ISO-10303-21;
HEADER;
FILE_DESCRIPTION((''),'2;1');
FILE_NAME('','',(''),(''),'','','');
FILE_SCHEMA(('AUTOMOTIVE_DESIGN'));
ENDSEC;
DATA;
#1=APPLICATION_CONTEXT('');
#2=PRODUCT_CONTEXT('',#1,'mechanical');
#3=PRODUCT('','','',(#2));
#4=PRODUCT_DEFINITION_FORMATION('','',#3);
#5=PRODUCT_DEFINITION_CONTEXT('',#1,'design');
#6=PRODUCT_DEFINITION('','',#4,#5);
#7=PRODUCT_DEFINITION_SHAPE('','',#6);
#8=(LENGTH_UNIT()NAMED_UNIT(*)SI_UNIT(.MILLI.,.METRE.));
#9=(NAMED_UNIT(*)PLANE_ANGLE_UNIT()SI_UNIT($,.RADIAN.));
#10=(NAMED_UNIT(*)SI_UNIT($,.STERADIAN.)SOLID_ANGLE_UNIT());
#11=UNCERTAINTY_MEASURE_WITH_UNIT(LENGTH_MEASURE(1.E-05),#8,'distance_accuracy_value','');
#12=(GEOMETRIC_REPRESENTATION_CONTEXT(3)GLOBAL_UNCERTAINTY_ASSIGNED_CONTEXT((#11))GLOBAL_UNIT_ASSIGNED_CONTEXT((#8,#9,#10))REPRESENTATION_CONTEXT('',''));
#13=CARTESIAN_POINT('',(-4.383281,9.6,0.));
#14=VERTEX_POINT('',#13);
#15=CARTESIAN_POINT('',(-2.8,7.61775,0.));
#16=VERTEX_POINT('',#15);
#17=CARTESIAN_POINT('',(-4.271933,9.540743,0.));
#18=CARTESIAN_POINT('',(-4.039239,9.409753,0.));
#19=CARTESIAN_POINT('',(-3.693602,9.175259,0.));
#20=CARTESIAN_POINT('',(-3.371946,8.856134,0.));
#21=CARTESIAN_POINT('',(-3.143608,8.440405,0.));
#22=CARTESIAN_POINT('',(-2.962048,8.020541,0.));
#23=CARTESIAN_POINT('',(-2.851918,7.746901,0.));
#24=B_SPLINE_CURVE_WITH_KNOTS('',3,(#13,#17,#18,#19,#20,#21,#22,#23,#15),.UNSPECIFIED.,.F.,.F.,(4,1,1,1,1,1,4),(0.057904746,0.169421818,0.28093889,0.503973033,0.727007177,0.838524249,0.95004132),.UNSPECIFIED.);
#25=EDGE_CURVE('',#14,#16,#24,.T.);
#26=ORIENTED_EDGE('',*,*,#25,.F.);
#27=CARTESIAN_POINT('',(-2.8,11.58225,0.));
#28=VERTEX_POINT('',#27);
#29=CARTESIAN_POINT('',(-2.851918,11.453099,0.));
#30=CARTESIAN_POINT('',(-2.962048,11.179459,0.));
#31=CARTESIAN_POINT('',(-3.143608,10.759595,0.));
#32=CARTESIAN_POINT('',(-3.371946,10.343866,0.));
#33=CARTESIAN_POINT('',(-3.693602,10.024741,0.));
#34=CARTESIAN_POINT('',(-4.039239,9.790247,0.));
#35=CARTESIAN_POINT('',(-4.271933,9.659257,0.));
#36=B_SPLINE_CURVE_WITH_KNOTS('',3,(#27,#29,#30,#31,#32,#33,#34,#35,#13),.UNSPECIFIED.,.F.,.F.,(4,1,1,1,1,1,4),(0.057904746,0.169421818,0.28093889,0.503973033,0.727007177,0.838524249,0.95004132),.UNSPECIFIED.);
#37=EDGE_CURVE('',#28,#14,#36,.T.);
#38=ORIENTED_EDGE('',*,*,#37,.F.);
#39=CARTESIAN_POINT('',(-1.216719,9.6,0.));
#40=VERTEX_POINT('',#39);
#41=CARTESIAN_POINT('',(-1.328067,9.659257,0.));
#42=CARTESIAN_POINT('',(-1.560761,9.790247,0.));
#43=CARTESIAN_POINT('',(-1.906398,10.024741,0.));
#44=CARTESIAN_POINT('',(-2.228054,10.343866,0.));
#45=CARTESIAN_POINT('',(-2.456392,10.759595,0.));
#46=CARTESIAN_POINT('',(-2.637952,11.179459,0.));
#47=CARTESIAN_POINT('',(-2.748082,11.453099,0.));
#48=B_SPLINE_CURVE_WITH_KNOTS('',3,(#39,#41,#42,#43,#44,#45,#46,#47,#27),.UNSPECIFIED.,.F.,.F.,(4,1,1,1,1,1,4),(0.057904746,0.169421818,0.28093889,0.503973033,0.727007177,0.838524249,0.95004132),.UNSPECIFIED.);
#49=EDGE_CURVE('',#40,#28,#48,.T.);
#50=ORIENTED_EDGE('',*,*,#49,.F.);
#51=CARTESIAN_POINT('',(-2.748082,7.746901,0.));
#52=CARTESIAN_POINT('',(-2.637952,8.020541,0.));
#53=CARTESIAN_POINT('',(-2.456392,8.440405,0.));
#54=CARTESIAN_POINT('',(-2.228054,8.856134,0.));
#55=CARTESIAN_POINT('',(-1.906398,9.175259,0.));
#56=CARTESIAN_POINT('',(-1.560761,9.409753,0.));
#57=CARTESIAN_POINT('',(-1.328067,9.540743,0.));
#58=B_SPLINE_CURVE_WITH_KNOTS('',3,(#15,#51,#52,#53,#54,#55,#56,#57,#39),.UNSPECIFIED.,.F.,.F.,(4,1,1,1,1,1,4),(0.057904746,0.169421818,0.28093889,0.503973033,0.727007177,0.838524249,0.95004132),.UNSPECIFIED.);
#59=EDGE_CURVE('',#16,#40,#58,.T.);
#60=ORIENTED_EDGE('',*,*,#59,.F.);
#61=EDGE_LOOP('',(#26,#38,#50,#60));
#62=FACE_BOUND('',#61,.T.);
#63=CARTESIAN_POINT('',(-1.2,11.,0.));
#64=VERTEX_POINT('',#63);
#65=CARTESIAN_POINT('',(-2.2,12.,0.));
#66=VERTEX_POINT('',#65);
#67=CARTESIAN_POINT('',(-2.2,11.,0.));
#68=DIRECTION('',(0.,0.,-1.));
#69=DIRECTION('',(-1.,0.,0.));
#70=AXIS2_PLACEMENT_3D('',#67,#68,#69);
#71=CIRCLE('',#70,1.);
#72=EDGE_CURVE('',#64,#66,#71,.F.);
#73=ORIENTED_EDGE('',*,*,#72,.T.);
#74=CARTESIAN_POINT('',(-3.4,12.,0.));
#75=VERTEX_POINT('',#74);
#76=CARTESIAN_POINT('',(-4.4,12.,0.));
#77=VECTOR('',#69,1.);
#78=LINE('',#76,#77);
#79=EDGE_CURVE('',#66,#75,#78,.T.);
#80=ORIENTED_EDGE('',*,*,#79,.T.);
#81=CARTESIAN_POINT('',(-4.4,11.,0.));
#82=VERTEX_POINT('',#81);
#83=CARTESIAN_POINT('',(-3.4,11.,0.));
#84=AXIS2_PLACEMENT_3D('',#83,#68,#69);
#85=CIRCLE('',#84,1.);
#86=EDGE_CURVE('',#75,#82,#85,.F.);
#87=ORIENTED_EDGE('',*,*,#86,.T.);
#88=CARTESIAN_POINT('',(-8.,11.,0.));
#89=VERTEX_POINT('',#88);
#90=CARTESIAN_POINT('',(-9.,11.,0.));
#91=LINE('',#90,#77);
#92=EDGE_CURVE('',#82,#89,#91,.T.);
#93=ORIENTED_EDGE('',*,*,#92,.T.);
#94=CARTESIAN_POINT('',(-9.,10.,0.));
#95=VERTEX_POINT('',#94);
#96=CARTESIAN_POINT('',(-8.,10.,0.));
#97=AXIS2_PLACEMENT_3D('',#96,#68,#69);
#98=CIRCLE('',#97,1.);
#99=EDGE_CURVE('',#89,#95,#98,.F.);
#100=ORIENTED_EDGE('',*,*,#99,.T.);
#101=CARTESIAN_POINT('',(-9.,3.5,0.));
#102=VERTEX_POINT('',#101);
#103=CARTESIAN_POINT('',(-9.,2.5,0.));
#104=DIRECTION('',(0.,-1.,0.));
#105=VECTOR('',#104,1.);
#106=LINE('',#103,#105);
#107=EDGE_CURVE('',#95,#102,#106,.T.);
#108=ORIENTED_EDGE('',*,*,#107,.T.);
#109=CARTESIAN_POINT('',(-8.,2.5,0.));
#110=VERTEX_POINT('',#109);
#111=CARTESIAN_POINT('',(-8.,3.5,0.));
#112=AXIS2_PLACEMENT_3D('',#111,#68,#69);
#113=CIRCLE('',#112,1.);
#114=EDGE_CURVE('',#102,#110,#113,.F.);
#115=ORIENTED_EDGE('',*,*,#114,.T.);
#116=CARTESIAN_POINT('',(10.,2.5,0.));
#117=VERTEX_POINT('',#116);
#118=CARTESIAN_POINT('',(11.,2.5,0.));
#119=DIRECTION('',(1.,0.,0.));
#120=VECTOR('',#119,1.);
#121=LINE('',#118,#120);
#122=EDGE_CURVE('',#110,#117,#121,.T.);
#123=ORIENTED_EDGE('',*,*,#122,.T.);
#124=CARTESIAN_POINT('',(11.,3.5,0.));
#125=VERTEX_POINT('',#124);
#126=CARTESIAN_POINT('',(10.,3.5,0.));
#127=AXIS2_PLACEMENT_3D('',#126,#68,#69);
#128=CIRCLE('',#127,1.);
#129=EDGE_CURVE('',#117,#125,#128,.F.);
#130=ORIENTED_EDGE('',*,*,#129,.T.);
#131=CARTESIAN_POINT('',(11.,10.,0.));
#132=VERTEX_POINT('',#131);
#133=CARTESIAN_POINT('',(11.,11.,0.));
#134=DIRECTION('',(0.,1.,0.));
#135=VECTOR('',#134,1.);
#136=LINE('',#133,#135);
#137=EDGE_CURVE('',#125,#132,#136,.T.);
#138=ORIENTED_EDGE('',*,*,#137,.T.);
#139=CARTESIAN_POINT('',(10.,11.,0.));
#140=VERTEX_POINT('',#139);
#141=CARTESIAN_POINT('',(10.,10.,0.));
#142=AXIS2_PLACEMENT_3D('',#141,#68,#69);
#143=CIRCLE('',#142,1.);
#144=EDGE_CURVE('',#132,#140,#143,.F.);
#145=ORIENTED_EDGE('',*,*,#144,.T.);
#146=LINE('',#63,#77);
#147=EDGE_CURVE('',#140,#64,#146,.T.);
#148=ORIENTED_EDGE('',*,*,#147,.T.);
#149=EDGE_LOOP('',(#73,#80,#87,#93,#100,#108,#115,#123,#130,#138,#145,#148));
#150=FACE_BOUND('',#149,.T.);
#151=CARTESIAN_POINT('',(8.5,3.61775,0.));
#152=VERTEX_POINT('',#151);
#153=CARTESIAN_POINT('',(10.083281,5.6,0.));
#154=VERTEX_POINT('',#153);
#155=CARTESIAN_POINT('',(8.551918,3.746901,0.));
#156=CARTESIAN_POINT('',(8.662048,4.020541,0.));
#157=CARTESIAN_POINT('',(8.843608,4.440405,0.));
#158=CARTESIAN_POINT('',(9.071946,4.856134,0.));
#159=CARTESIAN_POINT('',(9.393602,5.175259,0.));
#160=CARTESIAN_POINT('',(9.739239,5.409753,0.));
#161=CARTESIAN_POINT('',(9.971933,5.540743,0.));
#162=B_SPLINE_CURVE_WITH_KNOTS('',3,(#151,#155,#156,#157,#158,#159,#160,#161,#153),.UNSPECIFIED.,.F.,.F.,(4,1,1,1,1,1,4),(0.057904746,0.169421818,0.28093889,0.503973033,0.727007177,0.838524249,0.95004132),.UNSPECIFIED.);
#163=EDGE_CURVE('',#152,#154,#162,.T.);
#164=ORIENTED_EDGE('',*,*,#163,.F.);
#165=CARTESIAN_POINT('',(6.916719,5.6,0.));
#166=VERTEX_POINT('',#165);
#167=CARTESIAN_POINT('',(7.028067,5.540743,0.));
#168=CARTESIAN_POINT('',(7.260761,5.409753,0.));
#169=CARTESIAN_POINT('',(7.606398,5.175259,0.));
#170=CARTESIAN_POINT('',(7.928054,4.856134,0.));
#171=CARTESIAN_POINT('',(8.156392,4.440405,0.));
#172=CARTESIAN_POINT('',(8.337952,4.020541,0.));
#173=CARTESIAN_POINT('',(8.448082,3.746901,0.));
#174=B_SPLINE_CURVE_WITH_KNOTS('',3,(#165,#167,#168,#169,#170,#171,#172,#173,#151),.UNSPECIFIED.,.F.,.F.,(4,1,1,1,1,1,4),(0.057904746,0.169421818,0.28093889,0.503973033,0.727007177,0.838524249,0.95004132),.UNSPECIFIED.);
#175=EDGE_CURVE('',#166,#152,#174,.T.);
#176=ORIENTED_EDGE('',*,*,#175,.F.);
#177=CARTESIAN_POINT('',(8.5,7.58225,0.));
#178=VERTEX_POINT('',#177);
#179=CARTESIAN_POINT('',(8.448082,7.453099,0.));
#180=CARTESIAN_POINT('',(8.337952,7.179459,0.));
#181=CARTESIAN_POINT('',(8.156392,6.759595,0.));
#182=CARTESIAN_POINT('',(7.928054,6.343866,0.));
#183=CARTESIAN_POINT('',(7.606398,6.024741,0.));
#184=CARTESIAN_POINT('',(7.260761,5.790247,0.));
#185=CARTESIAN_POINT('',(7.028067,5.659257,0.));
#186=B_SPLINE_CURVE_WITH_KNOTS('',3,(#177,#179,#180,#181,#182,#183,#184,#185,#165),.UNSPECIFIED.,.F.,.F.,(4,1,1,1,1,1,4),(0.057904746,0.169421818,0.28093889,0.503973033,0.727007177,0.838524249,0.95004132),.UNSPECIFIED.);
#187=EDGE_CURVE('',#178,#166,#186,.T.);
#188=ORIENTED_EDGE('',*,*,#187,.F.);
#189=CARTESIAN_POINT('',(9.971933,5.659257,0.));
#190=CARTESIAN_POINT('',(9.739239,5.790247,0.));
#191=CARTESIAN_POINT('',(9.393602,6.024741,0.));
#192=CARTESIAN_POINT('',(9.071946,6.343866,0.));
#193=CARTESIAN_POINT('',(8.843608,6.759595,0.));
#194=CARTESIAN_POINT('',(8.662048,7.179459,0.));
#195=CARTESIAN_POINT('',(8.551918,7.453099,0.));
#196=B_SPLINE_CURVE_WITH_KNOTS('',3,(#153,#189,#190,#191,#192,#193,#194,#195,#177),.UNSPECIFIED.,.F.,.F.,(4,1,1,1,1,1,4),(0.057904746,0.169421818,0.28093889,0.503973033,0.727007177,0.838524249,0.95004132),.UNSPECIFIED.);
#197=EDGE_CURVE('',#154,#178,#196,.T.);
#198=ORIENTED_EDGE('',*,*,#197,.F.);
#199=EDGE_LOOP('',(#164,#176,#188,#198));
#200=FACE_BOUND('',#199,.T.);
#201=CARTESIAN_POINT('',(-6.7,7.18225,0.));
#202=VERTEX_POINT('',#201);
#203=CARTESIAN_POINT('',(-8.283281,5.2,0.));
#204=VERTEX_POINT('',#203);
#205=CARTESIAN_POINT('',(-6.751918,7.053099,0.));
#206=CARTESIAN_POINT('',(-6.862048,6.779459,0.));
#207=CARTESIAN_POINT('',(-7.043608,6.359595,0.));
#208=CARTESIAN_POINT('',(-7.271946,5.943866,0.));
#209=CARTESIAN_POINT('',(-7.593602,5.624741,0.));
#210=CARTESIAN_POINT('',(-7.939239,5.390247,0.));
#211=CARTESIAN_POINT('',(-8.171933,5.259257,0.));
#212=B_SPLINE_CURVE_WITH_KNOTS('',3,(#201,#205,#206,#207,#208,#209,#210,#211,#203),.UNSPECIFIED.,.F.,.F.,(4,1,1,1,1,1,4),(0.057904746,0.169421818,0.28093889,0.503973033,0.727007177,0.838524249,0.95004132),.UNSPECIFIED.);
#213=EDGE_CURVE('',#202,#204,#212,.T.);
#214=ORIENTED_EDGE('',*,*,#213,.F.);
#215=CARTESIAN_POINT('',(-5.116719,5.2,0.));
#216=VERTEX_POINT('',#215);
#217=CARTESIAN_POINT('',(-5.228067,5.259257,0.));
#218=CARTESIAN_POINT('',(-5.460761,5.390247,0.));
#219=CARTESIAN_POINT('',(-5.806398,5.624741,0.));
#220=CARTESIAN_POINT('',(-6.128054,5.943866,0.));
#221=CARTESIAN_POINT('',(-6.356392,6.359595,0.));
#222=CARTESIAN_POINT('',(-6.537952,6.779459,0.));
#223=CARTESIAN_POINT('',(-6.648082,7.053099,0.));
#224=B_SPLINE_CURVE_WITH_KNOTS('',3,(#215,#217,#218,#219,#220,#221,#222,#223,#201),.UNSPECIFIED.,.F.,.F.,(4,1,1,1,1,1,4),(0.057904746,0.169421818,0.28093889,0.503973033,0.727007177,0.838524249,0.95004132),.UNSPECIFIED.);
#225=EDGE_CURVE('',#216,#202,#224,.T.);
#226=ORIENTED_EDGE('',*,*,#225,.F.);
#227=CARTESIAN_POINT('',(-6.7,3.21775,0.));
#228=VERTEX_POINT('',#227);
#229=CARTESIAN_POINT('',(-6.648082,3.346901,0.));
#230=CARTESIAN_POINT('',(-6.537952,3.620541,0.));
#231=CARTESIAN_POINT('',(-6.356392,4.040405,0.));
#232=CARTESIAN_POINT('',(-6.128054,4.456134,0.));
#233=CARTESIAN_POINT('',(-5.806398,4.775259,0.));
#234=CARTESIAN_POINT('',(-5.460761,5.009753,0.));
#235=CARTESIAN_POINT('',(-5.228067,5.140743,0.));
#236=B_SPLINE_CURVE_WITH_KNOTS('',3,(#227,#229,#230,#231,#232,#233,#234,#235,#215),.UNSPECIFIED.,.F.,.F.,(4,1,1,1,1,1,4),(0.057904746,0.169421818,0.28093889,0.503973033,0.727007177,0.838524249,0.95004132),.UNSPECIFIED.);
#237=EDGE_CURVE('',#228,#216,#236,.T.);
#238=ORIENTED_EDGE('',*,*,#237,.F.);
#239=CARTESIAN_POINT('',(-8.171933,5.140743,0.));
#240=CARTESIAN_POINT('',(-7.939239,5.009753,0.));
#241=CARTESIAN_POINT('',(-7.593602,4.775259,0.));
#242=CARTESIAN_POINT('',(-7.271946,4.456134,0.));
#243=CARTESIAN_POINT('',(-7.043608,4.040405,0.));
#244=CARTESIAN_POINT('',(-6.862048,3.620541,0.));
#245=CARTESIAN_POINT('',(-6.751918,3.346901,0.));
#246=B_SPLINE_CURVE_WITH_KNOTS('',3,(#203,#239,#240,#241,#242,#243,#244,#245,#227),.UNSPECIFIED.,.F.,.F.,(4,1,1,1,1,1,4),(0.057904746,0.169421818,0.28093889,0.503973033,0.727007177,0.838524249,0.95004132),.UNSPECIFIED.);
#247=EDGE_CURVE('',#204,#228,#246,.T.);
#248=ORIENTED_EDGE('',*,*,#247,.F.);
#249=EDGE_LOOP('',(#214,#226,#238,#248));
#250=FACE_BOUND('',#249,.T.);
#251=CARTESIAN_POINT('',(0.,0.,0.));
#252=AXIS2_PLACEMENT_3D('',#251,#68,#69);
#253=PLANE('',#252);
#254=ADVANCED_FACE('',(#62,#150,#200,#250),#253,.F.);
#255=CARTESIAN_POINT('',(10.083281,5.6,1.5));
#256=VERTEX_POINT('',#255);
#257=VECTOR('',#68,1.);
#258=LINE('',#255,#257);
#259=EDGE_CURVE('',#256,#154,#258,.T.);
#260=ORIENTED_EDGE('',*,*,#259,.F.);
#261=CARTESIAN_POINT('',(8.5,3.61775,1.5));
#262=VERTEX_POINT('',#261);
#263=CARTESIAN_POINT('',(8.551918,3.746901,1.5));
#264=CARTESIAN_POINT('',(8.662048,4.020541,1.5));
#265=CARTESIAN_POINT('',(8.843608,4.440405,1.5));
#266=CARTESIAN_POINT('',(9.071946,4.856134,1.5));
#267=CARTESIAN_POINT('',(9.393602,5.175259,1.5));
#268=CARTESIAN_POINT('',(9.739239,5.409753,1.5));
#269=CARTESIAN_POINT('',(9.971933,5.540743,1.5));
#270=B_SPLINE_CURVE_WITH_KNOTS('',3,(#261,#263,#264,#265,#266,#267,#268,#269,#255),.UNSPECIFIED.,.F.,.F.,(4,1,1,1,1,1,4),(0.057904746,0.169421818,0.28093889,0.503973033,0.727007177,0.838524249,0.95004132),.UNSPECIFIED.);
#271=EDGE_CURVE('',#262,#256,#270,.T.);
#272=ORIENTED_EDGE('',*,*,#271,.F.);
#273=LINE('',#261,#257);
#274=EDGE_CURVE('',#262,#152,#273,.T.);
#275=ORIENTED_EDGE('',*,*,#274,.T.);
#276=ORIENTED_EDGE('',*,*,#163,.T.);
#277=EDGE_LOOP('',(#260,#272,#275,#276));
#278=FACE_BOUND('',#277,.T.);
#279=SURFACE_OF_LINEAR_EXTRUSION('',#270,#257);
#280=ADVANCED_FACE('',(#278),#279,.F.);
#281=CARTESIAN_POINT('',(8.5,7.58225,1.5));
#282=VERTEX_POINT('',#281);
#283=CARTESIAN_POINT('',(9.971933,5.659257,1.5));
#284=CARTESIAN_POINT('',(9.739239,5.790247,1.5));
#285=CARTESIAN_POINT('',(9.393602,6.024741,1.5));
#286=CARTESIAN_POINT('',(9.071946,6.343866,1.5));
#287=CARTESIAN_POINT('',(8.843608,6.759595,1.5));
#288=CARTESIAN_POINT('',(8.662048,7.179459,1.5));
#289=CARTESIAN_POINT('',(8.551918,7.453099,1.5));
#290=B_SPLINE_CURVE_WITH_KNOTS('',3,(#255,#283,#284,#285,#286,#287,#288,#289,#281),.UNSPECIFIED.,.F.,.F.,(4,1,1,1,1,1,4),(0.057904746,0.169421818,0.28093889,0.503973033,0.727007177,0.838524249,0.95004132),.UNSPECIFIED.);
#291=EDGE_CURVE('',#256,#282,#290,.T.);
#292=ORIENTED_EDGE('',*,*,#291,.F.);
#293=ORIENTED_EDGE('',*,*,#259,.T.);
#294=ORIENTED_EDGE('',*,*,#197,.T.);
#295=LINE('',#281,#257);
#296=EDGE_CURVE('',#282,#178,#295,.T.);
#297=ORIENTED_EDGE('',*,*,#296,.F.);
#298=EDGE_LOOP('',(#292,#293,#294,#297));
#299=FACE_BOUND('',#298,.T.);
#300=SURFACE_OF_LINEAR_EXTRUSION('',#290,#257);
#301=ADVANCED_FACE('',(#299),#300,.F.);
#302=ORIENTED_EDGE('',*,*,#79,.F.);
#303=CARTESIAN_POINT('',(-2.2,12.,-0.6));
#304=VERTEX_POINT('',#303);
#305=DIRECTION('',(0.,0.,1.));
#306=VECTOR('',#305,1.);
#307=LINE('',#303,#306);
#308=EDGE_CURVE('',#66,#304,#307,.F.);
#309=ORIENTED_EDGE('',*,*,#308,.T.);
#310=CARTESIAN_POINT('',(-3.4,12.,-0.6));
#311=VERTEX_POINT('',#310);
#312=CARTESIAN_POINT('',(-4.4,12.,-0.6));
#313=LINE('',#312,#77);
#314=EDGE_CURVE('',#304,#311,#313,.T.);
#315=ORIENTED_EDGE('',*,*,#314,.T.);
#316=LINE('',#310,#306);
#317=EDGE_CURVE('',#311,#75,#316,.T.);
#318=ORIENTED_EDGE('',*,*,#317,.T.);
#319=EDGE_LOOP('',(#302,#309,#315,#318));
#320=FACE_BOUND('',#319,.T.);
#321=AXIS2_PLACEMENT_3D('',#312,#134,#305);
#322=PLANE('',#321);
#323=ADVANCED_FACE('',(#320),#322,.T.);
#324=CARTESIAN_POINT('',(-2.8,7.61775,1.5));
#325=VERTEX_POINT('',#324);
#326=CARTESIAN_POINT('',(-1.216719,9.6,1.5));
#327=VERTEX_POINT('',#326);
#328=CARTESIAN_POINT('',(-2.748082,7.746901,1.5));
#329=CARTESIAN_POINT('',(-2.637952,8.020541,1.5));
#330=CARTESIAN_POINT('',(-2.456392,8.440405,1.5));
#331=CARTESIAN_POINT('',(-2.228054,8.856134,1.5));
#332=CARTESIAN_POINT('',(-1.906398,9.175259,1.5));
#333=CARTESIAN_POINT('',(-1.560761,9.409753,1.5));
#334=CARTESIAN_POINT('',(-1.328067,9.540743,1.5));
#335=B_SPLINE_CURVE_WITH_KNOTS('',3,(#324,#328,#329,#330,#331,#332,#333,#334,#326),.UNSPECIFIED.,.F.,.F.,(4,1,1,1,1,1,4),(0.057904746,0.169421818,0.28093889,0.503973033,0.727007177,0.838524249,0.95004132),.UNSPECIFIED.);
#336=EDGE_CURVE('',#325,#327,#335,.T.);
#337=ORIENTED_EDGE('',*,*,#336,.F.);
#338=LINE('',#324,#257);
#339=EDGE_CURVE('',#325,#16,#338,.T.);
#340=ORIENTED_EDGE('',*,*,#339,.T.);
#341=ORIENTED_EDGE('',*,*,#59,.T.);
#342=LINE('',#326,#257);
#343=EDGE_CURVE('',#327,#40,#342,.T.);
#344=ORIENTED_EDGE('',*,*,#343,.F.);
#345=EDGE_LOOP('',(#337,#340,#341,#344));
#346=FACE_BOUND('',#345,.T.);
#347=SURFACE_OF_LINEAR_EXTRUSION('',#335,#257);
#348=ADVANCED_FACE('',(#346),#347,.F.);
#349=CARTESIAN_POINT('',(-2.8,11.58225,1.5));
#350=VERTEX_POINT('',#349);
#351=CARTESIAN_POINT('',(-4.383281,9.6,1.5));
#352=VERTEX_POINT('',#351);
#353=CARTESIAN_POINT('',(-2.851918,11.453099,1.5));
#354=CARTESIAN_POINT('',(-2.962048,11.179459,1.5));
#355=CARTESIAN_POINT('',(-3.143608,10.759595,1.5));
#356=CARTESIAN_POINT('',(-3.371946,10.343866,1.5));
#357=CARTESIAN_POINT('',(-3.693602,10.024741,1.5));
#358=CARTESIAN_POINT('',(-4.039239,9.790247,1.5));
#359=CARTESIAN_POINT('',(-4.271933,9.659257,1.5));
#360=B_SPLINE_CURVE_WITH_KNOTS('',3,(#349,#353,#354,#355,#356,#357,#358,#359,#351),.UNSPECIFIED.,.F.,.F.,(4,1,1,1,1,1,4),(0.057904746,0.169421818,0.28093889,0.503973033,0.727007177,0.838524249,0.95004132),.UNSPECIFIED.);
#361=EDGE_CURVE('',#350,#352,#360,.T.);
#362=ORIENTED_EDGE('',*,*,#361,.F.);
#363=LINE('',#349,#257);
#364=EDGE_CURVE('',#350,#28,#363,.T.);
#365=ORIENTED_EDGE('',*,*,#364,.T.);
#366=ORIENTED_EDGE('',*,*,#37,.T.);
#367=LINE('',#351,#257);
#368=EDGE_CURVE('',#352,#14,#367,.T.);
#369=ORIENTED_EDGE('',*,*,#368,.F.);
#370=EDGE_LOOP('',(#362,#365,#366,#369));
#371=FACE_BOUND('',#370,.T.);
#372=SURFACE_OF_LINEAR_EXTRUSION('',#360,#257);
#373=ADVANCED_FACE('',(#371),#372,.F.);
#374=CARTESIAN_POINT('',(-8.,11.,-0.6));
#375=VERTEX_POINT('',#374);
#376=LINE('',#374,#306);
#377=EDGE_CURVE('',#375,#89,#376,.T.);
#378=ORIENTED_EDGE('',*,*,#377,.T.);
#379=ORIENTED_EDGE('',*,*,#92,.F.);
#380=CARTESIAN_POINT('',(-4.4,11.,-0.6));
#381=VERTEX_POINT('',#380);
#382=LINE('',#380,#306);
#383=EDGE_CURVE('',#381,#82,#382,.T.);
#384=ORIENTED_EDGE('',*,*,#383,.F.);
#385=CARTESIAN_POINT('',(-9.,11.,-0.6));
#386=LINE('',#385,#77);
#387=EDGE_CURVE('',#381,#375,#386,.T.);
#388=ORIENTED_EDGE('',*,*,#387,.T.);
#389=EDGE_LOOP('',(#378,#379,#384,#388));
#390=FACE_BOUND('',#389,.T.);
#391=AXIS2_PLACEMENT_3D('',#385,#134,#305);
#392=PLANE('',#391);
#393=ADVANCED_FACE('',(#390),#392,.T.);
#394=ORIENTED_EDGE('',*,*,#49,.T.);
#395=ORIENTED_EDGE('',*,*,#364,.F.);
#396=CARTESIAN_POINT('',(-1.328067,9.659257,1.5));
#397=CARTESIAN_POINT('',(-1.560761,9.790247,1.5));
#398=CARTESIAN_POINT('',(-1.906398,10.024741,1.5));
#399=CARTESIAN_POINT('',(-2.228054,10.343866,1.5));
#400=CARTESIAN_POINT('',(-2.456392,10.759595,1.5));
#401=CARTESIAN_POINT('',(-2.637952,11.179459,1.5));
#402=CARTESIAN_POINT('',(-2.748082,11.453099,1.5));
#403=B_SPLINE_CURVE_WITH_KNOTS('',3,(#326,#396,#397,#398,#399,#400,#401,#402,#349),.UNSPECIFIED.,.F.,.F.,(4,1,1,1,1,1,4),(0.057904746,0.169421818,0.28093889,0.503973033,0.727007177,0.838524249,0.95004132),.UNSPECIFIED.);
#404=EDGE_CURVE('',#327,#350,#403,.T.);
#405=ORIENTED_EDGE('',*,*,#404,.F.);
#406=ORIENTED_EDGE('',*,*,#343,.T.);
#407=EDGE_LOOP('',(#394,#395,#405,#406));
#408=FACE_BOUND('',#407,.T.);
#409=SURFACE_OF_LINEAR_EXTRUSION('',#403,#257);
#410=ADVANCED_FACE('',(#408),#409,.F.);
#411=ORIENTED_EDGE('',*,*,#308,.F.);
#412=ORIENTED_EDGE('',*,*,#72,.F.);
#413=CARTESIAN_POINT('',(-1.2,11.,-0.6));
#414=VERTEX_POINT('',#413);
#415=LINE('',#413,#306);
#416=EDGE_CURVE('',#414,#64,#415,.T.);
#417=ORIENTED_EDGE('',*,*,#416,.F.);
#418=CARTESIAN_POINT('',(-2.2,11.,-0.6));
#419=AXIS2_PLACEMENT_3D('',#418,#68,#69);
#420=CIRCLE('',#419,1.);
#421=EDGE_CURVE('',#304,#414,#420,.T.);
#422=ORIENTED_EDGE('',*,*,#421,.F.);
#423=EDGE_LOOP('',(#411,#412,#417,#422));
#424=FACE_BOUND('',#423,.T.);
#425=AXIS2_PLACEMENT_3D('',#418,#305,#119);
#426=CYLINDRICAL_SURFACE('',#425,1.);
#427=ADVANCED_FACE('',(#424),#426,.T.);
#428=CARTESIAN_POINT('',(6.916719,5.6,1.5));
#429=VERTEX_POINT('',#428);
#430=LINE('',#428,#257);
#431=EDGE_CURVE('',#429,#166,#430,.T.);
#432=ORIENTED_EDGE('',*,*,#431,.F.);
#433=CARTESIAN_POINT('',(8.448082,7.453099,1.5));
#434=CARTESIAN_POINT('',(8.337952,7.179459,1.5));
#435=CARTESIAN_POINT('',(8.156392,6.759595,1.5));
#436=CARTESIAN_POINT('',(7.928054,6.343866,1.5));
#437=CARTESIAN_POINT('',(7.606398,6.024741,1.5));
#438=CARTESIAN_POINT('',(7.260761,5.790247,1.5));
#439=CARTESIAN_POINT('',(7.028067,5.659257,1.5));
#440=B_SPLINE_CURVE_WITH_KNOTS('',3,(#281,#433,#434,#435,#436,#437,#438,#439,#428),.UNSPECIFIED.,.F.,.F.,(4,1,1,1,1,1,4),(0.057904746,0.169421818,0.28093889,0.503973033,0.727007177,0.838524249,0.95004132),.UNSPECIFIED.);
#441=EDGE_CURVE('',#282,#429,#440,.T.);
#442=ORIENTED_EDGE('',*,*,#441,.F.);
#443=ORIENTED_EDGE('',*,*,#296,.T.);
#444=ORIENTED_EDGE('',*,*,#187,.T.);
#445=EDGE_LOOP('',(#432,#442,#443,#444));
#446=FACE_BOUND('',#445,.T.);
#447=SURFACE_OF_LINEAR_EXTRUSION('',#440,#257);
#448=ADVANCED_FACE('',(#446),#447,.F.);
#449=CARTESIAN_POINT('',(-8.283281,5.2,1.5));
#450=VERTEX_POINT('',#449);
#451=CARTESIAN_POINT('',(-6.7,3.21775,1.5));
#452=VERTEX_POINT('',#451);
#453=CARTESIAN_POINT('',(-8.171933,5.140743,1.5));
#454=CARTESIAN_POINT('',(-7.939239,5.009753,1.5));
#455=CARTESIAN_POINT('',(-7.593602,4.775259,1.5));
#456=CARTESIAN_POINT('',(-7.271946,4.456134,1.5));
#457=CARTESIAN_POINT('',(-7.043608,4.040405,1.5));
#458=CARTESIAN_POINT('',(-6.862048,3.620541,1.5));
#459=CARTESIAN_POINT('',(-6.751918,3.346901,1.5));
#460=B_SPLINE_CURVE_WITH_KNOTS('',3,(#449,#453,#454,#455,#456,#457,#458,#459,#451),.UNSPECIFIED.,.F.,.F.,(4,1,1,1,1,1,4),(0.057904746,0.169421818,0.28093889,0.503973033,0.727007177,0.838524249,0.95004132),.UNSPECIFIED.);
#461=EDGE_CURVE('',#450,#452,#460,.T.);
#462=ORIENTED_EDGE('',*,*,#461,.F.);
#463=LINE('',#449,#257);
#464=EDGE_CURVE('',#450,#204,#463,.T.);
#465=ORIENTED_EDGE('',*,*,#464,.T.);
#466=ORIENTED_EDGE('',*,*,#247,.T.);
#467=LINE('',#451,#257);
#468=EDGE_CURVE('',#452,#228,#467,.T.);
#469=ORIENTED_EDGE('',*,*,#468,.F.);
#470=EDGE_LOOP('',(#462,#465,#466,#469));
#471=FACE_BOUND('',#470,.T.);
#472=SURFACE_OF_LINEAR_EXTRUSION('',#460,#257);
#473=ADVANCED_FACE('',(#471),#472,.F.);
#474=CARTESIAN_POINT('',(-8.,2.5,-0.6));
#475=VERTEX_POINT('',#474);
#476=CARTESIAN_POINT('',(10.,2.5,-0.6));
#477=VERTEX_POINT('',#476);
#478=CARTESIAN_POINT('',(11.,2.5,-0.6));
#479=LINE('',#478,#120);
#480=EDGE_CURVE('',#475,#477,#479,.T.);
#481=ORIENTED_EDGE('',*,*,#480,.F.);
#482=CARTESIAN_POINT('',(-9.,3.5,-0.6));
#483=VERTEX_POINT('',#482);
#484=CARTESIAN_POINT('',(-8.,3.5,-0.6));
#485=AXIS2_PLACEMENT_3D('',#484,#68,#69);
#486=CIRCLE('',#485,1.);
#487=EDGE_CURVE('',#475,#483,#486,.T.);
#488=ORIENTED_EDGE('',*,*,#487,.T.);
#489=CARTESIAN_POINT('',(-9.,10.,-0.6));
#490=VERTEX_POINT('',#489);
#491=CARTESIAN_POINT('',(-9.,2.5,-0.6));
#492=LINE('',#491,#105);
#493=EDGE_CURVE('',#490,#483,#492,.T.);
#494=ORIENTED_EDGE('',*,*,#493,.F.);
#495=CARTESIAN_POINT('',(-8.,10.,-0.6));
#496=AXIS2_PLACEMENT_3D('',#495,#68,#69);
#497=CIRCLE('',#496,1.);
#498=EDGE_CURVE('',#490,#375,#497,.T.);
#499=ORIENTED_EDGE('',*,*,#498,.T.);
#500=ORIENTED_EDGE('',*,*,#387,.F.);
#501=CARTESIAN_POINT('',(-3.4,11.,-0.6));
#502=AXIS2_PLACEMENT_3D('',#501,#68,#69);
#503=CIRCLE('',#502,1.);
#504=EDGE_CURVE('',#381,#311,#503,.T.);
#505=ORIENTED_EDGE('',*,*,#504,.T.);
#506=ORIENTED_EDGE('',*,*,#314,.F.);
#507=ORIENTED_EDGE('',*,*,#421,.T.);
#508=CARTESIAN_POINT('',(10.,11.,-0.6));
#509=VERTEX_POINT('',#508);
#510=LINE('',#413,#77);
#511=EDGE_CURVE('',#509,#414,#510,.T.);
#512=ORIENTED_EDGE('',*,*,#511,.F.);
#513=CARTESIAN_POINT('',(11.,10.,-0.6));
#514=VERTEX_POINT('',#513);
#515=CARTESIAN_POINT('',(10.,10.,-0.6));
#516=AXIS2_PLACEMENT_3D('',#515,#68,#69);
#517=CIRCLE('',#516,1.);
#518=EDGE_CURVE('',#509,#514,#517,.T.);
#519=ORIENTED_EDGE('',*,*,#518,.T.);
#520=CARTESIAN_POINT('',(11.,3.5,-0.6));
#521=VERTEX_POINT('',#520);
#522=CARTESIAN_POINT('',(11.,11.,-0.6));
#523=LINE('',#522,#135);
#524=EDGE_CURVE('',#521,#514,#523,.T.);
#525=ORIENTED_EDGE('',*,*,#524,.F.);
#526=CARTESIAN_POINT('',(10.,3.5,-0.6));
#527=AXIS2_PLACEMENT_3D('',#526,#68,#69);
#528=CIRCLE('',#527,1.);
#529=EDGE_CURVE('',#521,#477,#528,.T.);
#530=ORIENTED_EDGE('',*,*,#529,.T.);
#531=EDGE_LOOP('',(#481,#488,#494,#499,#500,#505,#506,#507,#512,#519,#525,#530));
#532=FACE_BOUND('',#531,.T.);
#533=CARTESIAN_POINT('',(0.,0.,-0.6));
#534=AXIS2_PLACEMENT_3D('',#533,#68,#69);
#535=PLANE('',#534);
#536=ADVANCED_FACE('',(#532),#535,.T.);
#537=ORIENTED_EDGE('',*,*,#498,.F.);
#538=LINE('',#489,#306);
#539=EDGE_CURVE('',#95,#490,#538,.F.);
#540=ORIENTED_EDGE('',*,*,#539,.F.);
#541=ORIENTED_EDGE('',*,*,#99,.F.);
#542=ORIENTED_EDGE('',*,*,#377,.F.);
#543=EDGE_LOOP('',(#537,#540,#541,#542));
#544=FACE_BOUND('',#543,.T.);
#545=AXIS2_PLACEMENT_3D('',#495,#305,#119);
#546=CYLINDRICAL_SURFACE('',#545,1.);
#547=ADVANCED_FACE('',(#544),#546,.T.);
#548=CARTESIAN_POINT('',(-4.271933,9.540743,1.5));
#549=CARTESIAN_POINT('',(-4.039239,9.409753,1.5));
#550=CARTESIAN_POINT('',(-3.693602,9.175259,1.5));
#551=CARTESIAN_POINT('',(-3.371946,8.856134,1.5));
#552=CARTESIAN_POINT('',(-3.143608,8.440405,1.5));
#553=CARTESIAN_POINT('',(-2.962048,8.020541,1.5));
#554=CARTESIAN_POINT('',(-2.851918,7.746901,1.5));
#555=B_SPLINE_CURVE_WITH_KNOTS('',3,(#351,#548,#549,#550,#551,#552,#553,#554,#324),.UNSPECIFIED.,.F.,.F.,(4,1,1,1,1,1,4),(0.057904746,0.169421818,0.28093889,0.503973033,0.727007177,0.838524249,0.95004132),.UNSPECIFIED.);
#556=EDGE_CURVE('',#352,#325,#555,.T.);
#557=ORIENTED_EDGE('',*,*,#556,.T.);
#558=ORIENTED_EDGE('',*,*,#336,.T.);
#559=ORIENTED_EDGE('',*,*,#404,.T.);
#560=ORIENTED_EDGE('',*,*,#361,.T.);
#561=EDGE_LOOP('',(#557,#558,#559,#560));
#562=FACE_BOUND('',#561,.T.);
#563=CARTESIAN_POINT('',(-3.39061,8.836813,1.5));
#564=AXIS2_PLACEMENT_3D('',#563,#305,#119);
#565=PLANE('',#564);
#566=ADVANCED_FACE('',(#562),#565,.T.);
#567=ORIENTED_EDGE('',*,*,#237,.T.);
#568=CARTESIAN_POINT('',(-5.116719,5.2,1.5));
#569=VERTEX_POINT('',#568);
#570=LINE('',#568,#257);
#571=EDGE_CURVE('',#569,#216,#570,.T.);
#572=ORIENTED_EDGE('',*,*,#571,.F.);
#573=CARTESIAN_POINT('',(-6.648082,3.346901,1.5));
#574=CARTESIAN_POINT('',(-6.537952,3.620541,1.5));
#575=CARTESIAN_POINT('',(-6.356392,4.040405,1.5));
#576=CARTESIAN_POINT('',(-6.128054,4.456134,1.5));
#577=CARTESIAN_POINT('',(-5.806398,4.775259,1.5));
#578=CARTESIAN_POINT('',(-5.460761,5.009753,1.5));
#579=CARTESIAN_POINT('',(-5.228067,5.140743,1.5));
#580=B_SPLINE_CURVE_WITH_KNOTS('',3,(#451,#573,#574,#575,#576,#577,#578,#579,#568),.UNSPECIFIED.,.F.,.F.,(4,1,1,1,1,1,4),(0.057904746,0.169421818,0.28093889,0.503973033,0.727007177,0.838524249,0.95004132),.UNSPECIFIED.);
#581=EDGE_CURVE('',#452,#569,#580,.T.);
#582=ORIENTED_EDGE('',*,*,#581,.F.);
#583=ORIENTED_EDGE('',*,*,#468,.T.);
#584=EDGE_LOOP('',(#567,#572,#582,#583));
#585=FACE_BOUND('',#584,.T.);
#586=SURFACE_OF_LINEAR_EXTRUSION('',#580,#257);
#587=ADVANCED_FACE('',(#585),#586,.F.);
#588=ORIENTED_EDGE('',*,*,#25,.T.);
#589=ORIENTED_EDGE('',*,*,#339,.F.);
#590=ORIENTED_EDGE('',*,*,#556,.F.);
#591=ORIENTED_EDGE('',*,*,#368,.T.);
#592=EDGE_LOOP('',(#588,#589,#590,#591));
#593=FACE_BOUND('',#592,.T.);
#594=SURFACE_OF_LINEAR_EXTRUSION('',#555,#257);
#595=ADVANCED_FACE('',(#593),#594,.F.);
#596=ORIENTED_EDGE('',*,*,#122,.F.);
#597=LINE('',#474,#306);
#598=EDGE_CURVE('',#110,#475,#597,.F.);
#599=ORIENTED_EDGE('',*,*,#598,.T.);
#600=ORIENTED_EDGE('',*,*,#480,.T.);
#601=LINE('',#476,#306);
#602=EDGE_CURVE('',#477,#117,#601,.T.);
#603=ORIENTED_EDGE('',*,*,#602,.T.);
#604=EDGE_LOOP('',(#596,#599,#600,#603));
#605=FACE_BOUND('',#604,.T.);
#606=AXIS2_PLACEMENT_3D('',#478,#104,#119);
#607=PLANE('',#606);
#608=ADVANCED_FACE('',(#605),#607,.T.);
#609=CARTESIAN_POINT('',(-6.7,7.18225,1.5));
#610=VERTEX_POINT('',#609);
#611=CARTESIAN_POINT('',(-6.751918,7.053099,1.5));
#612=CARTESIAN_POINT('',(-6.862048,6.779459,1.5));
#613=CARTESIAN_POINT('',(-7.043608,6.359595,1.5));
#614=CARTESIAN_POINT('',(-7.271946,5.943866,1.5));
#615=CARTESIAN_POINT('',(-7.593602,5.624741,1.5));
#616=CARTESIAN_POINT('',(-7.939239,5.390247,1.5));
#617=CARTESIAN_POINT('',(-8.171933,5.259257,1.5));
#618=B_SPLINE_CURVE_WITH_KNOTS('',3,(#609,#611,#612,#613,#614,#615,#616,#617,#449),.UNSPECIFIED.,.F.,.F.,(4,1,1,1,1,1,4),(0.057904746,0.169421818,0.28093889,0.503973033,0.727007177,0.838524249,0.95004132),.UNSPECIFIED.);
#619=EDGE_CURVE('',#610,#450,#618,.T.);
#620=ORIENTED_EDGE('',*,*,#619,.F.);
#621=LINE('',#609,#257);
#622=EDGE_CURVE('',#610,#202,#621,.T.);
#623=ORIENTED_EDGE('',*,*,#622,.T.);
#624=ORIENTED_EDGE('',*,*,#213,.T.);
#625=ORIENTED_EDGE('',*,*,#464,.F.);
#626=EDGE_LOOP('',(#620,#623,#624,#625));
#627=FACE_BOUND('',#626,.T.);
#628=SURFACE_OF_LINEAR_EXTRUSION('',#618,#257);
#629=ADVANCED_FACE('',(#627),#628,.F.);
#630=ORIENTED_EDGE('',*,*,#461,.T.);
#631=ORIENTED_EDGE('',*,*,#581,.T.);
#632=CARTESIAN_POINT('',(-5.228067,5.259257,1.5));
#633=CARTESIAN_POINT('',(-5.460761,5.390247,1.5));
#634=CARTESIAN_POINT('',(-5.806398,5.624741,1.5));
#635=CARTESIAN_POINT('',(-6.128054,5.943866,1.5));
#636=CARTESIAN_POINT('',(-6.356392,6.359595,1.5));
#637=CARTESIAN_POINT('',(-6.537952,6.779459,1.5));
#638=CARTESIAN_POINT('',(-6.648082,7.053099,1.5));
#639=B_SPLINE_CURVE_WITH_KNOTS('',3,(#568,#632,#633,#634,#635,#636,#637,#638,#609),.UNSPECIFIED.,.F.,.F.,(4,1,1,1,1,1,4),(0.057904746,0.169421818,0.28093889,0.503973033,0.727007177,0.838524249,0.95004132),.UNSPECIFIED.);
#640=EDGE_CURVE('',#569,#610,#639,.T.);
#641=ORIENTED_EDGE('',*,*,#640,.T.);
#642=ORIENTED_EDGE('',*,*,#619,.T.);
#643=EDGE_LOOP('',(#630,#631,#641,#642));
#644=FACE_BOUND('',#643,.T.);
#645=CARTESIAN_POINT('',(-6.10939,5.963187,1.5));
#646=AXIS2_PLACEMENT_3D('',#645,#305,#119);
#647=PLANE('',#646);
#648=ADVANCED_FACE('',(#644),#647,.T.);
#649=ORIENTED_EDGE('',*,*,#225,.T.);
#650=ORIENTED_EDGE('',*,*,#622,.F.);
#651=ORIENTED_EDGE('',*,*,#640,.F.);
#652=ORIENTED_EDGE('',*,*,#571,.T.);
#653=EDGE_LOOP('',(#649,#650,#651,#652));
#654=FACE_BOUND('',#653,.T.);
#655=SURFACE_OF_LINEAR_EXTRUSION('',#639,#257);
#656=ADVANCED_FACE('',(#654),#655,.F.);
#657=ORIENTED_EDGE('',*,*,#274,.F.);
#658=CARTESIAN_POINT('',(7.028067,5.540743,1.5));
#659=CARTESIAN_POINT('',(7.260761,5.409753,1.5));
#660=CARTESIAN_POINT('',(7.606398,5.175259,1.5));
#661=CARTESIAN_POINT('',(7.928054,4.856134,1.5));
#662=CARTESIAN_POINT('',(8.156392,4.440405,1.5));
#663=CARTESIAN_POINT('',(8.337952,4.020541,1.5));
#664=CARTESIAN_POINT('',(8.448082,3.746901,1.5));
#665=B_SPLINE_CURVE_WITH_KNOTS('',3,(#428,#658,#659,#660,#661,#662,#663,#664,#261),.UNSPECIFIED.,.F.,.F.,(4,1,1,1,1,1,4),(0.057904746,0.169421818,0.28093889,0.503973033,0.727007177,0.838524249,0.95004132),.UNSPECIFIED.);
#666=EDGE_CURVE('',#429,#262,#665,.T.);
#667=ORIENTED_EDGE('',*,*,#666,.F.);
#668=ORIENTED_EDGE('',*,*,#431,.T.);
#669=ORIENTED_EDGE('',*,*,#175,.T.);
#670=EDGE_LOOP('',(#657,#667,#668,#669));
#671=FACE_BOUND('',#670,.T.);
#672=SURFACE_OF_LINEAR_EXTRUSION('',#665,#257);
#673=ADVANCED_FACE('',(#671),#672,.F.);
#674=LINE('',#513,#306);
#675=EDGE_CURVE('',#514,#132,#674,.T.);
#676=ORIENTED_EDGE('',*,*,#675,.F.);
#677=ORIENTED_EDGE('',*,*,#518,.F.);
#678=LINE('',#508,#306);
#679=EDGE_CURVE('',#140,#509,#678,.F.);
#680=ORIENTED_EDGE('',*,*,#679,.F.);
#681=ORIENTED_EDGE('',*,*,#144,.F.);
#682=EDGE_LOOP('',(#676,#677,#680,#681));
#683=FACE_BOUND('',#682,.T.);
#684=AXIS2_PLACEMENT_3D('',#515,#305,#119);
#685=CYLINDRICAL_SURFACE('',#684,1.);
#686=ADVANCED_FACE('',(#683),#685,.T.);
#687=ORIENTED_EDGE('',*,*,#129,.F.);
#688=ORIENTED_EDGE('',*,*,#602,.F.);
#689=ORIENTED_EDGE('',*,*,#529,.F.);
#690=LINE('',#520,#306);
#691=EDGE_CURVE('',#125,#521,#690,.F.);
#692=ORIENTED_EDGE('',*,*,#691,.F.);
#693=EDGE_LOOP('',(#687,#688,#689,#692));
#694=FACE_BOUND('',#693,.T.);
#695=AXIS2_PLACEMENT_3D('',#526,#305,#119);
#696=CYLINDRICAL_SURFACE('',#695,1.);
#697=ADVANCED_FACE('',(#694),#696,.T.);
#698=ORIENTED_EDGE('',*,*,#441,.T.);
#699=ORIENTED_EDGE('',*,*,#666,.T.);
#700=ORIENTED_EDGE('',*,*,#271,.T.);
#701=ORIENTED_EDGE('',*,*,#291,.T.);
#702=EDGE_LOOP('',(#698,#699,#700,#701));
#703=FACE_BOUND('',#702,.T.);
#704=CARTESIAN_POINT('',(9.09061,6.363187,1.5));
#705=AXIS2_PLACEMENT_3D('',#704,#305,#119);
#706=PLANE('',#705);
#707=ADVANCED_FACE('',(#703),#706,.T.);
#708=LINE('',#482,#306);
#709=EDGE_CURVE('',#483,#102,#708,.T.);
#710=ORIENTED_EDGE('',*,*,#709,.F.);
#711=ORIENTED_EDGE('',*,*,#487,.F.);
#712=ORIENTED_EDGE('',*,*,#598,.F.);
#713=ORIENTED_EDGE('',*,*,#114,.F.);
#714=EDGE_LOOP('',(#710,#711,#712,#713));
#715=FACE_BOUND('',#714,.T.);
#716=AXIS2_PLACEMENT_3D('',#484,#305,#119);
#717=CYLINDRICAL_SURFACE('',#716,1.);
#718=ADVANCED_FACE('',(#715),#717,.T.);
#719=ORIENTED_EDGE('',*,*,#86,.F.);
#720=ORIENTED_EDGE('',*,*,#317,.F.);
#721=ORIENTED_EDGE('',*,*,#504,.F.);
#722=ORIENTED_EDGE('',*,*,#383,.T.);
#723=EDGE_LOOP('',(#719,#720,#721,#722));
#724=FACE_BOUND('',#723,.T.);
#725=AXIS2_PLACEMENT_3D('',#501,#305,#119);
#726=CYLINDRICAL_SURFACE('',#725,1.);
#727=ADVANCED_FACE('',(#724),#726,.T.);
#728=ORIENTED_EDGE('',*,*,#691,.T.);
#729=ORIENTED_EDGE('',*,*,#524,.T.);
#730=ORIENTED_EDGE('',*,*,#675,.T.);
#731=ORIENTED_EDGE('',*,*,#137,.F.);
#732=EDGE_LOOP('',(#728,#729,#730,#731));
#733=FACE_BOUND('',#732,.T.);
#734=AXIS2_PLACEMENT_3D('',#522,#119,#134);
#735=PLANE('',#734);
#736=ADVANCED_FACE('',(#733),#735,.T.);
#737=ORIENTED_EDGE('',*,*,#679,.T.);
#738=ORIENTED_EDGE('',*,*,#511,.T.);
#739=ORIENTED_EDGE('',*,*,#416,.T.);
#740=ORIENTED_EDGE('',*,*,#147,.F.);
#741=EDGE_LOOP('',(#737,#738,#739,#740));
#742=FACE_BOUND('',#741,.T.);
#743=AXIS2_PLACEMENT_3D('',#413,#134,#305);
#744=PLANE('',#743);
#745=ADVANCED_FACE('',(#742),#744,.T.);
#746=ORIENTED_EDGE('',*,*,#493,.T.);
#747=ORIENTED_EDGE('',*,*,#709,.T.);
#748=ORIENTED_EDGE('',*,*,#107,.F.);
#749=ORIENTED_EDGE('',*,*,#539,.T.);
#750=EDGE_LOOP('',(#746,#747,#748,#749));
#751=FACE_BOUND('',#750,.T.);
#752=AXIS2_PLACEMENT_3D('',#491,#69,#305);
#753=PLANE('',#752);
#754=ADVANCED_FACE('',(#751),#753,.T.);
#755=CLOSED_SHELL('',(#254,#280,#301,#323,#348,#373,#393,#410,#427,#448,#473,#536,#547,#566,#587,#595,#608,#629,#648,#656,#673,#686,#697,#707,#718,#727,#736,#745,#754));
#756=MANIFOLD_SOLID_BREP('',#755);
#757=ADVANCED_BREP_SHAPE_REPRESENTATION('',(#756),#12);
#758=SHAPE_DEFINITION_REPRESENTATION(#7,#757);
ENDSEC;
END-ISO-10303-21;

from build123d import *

# Parameters (mm, degrees)
BOSS_EXTRUDE1_DEPTH = 0.6
BOSS_EXTRUDE2_DEPTH = 1.5
FILLET1_R           = 1


with BuildPart() as part:
    # Sketch2 → Boss-Extrude1 (new body)
    with BuildSketch(Plane.XY):
        Polygon((-9, 11), (-4.4, 11), (-4.4, 12), (-1.2, 12), (-1.2, 11), (11, 11), (11, 2.5), (-9, 2.5), align=None)
    extrude(amount=-BOSS_EXTRUDE1_DEPTH)

    # Sketch1 → Boss-Extrude2 (add)
    with BuildSketch(Plane.XY):
        with BuildLine():
            add(Edge.make_bspline(
                [(8.5, 7.582250387), (8.448081693, 7.453099482), (8.337951661, 7.179459039), (8.156392198, 6.75959463), (7.928053742, 6.343866223), (7.606398256, 6.024741111), (7.260761425, 5.790247234), (7.028066866, 5.65925749), (6.916719247, 5.6)],
                knots=[0.057904746, 0.057904746, 0.057904746, 0.057904746, 0.169421818, 0.28093889, 0.503973033, 0.727007177, 0.838524249, 0.95004132, 0.95004132, 0.95004132, 0.95004132], degree=3))
            add(Edge.make_bspline(
                [(6.916719247, 5.6), (7.028066866, 5.54074251), (7.260761425, 5.409752766), (7.606398256, 5.175258889), (7.928053742, 4.856133777), (8.156392198, 4.44040537), (8.337951661, 4.020540961), (8.448081693, 3.746900518), (8.5, 3.617749613)],
                knots=[0.057904746, 0.057904746, 0.057904746, 0.057904746, 0.169421818, 0.28093889, 0.503973033, 0.727007177, 0.838524249, 0.95004132, 0.95004132, 0.95004132, 0.95004132], degree=3))
            add(Edge.make_bspline(
                [(8.5, 3.617749613), (8.551918307, 3.746900518), (8.662048339, 4.020540961), (8.843607802, 4.44040537), (9.071946258, 4.856133777), (9.393601744, 5.175258889), (9.739238575, 5.409752766), (9.971933134, 5.54074251), (10.083280753, 5.6)],
                knots=[0.057904746, 0.057904746, 0.057904746, 0.057904746, 0.169421818, 0.28093889, 0.503973033, 0.727007177, 0.838524249, 0.95004132, 0.95004132, 0.95004132, 0.95004132], degree=3))
            add(Edge.make_bspline(
                [(10.083280753, 5.6), (9.971933134, 5.65925749), (9.739238575, 5.790247234), (9.393601744, 6.024741111), (9.071946258, 6.343866223), (8.843607802, 6.75959463), (8.662048339, 7.179459039), (8.551918307, 7.453099482), (8.5, 7.582250387)],
                knots=[0.057904746, 0.057904746, 0.057904746, 0.057904746, 0.169421818, 0.28093889, 0.503973033, 0.727007177, 0.838524249, 0.95004132, 0.95004132, 0.95004132, 0.95004132], degree=3))
        make_face()
        with BuildLine():
            add(Edge.make_bspline(
                [(-2.8, 7.617749613), (-2.748081693, 7.746900518), (-2.637951661, 8.020540961), (-2.456392198, 8.44040537), (-2.228053742, 8.856133777), (-1.906398256, 9.175258889), (-1.560761425, 9.409752766), (-1.328066866, 9.54074251), (-1.216719247, 9.6)],
                knots=[0.057904746, 0.057904746, 0.057904746, 0.057904746, 0.169421818, 0.28093889, 0.503973033, 0.727007177, 0.838524249, 0.95004132, 0.95004132, 0.95004132, 0.95004132], degree=3))
            add(Edge.make_bspline(
                [(-1.216719247, 9.6), (-1.328066866, 9.65925749), (-1.560761425, 9.790247234), (-1.906398256, 10.024741111), (-2.228053742, 10.343866223), (-2.456392198, 10.75959463), (-2.637951661, 11.179459039), (-2.748081693, 11.453099482), (-2.8, 11.582250387)],
                knots=[0.057904746, 0.057904746, 0.057904746, 0.057904746, 0.169421818, 0.28093889, 0.503973033, 0.727007177, 0.838524249, 0.95004132, 0.95004132, 0.95004132, 0.95004132], degree=3))
            add(Edge.make_bspline(
                [(-2.8, 11.582250387), (-2.851918307, 11.453099482), (-2.962048339, 11.179459039), (-3.143607802, 10.75959463), (-3.371946258, 10.343866223), (-3.693601744, 10.024741111), (-4.039238575, 9.790247234), (-4.271933134, 9.65925749), (-4.383280753, 9.6)],
                knots=[0.057904746, 0.057904746, 0.057904746, 0.057904746, 0.169421818, 0.28093889, 0.503973033, 0.727007177, 0.838524249, 0.95004132, 0.95004132, 0.95004132, 0.95004132], degree=3))
            add(Edge.make_bspline(
                [(-4.383280753, 9.6), (-4.271933134, 9.54074251), (-4.039238575, 9.409752766), (-3.693601744, 9.175258889), (-3.371946258, 8.856133777), (-3.143607802, 8.44040537), (-2.962048339, 8.020540961), (-2.851918307, 7.746900518), (-2.8, 7.617749613)],
                knots=[0.057904746, 0.057904746, 0.057904746, 0.057904746, 0.169421818, 0.28093889, 0.503973033, 0.727007177, 0.838524249, 0.95004132, 0.95004132, 0.95004132, 0.95004132], degree=3))
        make_face()
        with BuildLine():
            add(Edge.make_bspline(
                [(-6.7, 7.182250387), (-6.751918307, 7.053099482), (-6.862048339, 6.779459039), (-7.043607802, 6.35959463), (-7.271946258, 5.943866223), (-7.593601744, 5.624741111), (-7.939238575, 5.390247234), (-8.171933134, 5.25925749), (-8.283280753, 5.2)],
                knots=[0.057904746, 0.057904746, 0.057904746, 0.057904746, 0.169421818, 0.28093889, 0.503973033, 0.727007177, 0.838524249, 0.95004132, 0.95004132, 0.95004132, 0.95004132], degree=3))
            add(Edge.make_bspline(
                [(-8.283280753, 5.2), (-8.171933134, 5.14074251), (-7.939238575, 5.009752766), (-7.593601744, 4.775258889), (-7.271946258, 4.456133777), (-7.043607802, 4.04040537), (-6.862048339, 3.620540961), (-6.751918307, 3.346900518), (-6.7, 3.217749613)],
                knots=[0.057904746, 0.057904746, 0.057904746, 0.057904746, 0.169421818, 0.28093889, 0.503973033, 0.727007177, 0.838524249, 0.95004132, 0.95004132, 0.95004132, 0.95004132], degree=3))
            add(Edge.make_bspline(
                [(-6.7, 3.217749613), (-6.648081693, 3.346900518), (-6.537951661, 3.620540961), (-6.356392198, 4.04040537), (-6.128053742, 4.456133777), (-5.806398256, 4.775258889), (-5.460761425, 5.009752766), (-5.228066866, 5.14074251), (-5.116719247, 5.2)],
                knots=[0.057904746, 0.057904746, 0.057904746, 0.057904746, 0.169421818, 0.28093889, 0.503973033, 0.727007177, 0.838524249, 0.95004132, 0.95004132, 0.95004132, 0.95004132], degree=3))
            add(Edge.make_bspline(
                [(-5.116719247, 5.2), (-5.228066866, 5.25925749), (-5.460761425, 5.390247234), (-5.806398256, 5.624741111), (-6.128053742, 5.943866223), (-6.356392198, 6.35959463), (-6.537951661, 6.779459039), (-6.648081693, 7.053099482), (-6.7, 7.182250387)],
                knots=[0.057904746, 0.057904746, 0.057904746, 0.057904746, 0.169421818, 0.28093889, 0.503973033, 0.727007177, 0.838524249, 0.95004132, 0.95004132, 0.95004132, 0.95004132], degree=3))
        make_face()
    extrude(amount=BOSS_EXTRUDE2_DEPTH)

    # Fillet1
    fillet1_edges = [part.edges().sort_by_distance(p)[0] for p in [
        (-9, 2.5, -0.3),
        (11, 2.5, -0.3),
        (11, 11, -0.3),
        (-1.2, 12, -0.3),
        (-4.4, 12, -0.3),
        (-9, 11, -0.3),
    ]]
    fillet(fillet1_edges, radius=FILLET1_R - 0.0001)  # a hair under: the kernel refuses the full size


solid = part.part
